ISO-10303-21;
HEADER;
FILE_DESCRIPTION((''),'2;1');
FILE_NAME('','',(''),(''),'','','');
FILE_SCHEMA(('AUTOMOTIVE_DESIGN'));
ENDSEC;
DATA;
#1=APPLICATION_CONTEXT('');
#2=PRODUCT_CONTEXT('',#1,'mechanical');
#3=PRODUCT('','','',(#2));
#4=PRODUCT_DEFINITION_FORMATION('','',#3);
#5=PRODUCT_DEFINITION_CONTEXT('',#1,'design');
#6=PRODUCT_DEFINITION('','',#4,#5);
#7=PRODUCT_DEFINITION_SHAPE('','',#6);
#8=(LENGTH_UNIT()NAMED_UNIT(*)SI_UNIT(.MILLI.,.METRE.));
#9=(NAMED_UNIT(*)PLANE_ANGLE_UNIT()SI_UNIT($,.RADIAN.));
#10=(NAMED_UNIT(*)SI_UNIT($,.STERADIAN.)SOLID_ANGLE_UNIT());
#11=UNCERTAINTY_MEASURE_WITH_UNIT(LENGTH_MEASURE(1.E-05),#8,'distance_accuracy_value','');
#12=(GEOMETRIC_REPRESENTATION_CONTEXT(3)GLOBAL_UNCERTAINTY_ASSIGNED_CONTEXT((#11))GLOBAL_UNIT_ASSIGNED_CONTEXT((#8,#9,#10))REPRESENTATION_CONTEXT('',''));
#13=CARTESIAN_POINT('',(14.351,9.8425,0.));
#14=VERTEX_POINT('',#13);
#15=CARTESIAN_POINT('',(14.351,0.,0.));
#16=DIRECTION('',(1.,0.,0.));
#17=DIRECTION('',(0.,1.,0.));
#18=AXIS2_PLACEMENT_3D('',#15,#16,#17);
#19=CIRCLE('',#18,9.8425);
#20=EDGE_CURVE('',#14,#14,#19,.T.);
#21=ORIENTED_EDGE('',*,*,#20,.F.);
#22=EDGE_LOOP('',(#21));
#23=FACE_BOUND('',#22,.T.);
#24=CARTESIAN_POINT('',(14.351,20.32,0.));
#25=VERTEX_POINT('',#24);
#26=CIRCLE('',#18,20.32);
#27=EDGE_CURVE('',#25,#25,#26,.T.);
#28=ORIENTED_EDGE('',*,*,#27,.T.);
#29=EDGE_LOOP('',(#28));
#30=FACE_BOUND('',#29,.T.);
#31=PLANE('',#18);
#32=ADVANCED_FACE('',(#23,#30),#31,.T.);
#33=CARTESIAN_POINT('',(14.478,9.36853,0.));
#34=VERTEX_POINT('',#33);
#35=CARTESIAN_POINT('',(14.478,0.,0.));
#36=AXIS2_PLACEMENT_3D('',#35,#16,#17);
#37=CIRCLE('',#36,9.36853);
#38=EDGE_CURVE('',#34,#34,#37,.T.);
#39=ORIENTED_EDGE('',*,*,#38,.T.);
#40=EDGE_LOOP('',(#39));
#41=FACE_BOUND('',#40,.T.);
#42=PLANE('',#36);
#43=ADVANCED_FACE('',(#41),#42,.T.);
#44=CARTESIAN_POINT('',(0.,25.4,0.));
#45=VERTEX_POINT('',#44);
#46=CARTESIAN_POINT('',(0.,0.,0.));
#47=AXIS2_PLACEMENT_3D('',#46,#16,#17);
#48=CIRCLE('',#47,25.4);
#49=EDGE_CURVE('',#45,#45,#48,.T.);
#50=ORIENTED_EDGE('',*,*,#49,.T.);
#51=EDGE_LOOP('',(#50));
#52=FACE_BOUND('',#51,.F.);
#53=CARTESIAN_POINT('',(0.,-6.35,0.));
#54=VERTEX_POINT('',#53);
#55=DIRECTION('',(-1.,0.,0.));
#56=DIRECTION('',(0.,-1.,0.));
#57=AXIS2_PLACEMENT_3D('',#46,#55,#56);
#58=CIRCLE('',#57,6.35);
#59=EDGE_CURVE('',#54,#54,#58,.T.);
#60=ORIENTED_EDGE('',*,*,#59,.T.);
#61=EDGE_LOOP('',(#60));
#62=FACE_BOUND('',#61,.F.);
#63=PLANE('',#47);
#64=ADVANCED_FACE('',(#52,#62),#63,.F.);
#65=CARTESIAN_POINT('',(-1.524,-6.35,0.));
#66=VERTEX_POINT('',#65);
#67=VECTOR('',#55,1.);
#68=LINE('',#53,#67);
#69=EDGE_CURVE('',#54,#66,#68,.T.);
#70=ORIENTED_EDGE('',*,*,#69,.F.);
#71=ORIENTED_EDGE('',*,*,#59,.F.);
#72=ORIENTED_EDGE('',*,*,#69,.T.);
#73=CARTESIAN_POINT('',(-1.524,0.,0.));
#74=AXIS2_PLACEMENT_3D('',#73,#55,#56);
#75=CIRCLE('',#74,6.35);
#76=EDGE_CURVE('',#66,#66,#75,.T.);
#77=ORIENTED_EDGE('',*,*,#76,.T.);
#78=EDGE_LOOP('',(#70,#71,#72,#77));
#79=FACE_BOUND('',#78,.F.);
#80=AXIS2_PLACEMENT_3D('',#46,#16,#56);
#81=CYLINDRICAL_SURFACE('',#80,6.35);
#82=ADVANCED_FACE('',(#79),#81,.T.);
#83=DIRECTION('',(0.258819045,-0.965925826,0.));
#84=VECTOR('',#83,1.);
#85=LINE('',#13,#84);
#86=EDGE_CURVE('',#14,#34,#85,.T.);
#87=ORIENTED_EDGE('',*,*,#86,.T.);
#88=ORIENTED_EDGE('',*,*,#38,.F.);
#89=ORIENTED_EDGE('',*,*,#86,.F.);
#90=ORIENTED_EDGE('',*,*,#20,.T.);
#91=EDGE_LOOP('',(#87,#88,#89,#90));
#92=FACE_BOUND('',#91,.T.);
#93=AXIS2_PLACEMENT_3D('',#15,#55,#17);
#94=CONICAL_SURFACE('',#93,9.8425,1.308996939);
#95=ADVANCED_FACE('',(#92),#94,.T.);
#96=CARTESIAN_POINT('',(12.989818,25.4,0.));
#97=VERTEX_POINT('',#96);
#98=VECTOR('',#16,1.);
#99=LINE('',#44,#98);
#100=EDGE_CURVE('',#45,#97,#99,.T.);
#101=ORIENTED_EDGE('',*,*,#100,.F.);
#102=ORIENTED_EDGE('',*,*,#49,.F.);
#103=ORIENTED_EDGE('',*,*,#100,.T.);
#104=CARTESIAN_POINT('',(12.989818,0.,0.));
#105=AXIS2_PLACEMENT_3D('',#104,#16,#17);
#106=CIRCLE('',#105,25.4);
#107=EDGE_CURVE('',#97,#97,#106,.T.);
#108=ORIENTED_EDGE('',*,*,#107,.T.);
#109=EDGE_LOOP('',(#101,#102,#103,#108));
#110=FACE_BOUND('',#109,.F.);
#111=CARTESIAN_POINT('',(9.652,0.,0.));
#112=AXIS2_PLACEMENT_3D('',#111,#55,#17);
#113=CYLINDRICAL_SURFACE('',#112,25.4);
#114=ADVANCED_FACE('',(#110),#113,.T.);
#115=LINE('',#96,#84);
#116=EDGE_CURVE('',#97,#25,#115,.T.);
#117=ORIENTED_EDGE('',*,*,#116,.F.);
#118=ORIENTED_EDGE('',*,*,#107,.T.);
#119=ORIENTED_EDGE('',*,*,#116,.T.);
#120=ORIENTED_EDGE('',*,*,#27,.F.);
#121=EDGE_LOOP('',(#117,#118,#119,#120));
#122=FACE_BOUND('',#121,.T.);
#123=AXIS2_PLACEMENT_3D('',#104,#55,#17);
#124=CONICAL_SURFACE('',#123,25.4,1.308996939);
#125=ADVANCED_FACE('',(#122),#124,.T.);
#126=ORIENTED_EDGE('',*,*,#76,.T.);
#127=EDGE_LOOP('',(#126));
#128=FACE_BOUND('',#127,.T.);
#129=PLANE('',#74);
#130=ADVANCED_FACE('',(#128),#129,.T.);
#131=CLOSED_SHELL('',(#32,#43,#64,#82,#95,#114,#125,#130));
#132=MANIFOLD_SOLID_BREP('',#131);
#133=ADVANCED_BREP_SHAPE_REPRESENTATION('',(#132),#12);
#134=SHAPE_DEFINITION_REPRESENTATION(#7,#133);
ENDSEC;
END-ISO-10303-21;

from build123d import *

# Parameters (mm, degrees)
F0_R     = 25.4
F1_DEPTH = 9.652
F2_R     = 4.7625
F3_DEPTH = 4.826
F4_DEPTH = 4.699
F6_DEPTH = 3.175
F7_R     = 6.35
F8_DEPTH = 1.524


# Not quite as in the source:
# - a fillet or chamfer that OpenCascade refuses, or shapes differently, is made with other operations: its cross-section is extruded or revolved along the edge and cut away or added


with BuildPart() as f1:
    # F0 (on Right) → F1 (new body)
    with BuildSketch(Plane.YZ):
        Circle(F0_R)
    extrude(amount=F1_DEPTH)

    # F2 (on face) → F3 (join)
    with BuildSketch(Plane.YZ.offset(9.652)):
        Circle(F2_R)
    extrude(amount=F3_DEPTH)

    # F4 (add): a face of the model
    f4_faces = [f1.faces().sort_by_distance(p)[0] for p in [
        (9.652, -24.6815795103, 0),
    ]]
    extrude(f4_faces, amount=F4_DEPTH)

    # F5: chamfer of 5.08 x 1.3611818976 on 2 edges, made by hand


with BuildPart() as f5_tool2:
    # F5_s3 → F5_t4 (revolve)
    with BuildSketch(Plane.XY):
        Polygon((14.351, 9.8425), (15.7121818976, 4.7625), (14.351, 4.7625), align=None)
    revolve(axis=Axis((14.351, 0, 0), (1, 0, 0)))

    split(bisect_by=Plane.YZ.offset(14.478), keep=Keep.BOTTOM)


with BuildPart() as f1_1:
    add(f1.part)

    # F5_t1: union F5_tool2
    add(f5_tool2.part)

    # F5_s6 → F5_t7 (revolve, cut)
    with BuildSketch(Plane.XY):
        Polygon((12.9898181024, 25.4), (14.351, 20.32), (14.351, 25.4), align=None)
    revolve(axis=Axis((14.351, 0, 0), (1, 0, 0)), mode=Mode.SUBTRACT)

    # F6 (cut): a face of the model
    f6_faces = [f1_1.faces().sort_by_distance(p)[0] for p in [
        (0, 0, 0),
    ]]
    extrude(f6_faces, amount=F6_DEPTH, mode=Mode.SUBTRACT)

    # F7 (on face) → F8 (join)
    with BuildSketch(Plane(origin=(0, 0, 0), x_dir=(0, -1, 0), z_dir=(-1, 0, 0))):
        Circle(F7_R)
    extrude(amount=F8_DEPTH)


solid = f1_1.part
